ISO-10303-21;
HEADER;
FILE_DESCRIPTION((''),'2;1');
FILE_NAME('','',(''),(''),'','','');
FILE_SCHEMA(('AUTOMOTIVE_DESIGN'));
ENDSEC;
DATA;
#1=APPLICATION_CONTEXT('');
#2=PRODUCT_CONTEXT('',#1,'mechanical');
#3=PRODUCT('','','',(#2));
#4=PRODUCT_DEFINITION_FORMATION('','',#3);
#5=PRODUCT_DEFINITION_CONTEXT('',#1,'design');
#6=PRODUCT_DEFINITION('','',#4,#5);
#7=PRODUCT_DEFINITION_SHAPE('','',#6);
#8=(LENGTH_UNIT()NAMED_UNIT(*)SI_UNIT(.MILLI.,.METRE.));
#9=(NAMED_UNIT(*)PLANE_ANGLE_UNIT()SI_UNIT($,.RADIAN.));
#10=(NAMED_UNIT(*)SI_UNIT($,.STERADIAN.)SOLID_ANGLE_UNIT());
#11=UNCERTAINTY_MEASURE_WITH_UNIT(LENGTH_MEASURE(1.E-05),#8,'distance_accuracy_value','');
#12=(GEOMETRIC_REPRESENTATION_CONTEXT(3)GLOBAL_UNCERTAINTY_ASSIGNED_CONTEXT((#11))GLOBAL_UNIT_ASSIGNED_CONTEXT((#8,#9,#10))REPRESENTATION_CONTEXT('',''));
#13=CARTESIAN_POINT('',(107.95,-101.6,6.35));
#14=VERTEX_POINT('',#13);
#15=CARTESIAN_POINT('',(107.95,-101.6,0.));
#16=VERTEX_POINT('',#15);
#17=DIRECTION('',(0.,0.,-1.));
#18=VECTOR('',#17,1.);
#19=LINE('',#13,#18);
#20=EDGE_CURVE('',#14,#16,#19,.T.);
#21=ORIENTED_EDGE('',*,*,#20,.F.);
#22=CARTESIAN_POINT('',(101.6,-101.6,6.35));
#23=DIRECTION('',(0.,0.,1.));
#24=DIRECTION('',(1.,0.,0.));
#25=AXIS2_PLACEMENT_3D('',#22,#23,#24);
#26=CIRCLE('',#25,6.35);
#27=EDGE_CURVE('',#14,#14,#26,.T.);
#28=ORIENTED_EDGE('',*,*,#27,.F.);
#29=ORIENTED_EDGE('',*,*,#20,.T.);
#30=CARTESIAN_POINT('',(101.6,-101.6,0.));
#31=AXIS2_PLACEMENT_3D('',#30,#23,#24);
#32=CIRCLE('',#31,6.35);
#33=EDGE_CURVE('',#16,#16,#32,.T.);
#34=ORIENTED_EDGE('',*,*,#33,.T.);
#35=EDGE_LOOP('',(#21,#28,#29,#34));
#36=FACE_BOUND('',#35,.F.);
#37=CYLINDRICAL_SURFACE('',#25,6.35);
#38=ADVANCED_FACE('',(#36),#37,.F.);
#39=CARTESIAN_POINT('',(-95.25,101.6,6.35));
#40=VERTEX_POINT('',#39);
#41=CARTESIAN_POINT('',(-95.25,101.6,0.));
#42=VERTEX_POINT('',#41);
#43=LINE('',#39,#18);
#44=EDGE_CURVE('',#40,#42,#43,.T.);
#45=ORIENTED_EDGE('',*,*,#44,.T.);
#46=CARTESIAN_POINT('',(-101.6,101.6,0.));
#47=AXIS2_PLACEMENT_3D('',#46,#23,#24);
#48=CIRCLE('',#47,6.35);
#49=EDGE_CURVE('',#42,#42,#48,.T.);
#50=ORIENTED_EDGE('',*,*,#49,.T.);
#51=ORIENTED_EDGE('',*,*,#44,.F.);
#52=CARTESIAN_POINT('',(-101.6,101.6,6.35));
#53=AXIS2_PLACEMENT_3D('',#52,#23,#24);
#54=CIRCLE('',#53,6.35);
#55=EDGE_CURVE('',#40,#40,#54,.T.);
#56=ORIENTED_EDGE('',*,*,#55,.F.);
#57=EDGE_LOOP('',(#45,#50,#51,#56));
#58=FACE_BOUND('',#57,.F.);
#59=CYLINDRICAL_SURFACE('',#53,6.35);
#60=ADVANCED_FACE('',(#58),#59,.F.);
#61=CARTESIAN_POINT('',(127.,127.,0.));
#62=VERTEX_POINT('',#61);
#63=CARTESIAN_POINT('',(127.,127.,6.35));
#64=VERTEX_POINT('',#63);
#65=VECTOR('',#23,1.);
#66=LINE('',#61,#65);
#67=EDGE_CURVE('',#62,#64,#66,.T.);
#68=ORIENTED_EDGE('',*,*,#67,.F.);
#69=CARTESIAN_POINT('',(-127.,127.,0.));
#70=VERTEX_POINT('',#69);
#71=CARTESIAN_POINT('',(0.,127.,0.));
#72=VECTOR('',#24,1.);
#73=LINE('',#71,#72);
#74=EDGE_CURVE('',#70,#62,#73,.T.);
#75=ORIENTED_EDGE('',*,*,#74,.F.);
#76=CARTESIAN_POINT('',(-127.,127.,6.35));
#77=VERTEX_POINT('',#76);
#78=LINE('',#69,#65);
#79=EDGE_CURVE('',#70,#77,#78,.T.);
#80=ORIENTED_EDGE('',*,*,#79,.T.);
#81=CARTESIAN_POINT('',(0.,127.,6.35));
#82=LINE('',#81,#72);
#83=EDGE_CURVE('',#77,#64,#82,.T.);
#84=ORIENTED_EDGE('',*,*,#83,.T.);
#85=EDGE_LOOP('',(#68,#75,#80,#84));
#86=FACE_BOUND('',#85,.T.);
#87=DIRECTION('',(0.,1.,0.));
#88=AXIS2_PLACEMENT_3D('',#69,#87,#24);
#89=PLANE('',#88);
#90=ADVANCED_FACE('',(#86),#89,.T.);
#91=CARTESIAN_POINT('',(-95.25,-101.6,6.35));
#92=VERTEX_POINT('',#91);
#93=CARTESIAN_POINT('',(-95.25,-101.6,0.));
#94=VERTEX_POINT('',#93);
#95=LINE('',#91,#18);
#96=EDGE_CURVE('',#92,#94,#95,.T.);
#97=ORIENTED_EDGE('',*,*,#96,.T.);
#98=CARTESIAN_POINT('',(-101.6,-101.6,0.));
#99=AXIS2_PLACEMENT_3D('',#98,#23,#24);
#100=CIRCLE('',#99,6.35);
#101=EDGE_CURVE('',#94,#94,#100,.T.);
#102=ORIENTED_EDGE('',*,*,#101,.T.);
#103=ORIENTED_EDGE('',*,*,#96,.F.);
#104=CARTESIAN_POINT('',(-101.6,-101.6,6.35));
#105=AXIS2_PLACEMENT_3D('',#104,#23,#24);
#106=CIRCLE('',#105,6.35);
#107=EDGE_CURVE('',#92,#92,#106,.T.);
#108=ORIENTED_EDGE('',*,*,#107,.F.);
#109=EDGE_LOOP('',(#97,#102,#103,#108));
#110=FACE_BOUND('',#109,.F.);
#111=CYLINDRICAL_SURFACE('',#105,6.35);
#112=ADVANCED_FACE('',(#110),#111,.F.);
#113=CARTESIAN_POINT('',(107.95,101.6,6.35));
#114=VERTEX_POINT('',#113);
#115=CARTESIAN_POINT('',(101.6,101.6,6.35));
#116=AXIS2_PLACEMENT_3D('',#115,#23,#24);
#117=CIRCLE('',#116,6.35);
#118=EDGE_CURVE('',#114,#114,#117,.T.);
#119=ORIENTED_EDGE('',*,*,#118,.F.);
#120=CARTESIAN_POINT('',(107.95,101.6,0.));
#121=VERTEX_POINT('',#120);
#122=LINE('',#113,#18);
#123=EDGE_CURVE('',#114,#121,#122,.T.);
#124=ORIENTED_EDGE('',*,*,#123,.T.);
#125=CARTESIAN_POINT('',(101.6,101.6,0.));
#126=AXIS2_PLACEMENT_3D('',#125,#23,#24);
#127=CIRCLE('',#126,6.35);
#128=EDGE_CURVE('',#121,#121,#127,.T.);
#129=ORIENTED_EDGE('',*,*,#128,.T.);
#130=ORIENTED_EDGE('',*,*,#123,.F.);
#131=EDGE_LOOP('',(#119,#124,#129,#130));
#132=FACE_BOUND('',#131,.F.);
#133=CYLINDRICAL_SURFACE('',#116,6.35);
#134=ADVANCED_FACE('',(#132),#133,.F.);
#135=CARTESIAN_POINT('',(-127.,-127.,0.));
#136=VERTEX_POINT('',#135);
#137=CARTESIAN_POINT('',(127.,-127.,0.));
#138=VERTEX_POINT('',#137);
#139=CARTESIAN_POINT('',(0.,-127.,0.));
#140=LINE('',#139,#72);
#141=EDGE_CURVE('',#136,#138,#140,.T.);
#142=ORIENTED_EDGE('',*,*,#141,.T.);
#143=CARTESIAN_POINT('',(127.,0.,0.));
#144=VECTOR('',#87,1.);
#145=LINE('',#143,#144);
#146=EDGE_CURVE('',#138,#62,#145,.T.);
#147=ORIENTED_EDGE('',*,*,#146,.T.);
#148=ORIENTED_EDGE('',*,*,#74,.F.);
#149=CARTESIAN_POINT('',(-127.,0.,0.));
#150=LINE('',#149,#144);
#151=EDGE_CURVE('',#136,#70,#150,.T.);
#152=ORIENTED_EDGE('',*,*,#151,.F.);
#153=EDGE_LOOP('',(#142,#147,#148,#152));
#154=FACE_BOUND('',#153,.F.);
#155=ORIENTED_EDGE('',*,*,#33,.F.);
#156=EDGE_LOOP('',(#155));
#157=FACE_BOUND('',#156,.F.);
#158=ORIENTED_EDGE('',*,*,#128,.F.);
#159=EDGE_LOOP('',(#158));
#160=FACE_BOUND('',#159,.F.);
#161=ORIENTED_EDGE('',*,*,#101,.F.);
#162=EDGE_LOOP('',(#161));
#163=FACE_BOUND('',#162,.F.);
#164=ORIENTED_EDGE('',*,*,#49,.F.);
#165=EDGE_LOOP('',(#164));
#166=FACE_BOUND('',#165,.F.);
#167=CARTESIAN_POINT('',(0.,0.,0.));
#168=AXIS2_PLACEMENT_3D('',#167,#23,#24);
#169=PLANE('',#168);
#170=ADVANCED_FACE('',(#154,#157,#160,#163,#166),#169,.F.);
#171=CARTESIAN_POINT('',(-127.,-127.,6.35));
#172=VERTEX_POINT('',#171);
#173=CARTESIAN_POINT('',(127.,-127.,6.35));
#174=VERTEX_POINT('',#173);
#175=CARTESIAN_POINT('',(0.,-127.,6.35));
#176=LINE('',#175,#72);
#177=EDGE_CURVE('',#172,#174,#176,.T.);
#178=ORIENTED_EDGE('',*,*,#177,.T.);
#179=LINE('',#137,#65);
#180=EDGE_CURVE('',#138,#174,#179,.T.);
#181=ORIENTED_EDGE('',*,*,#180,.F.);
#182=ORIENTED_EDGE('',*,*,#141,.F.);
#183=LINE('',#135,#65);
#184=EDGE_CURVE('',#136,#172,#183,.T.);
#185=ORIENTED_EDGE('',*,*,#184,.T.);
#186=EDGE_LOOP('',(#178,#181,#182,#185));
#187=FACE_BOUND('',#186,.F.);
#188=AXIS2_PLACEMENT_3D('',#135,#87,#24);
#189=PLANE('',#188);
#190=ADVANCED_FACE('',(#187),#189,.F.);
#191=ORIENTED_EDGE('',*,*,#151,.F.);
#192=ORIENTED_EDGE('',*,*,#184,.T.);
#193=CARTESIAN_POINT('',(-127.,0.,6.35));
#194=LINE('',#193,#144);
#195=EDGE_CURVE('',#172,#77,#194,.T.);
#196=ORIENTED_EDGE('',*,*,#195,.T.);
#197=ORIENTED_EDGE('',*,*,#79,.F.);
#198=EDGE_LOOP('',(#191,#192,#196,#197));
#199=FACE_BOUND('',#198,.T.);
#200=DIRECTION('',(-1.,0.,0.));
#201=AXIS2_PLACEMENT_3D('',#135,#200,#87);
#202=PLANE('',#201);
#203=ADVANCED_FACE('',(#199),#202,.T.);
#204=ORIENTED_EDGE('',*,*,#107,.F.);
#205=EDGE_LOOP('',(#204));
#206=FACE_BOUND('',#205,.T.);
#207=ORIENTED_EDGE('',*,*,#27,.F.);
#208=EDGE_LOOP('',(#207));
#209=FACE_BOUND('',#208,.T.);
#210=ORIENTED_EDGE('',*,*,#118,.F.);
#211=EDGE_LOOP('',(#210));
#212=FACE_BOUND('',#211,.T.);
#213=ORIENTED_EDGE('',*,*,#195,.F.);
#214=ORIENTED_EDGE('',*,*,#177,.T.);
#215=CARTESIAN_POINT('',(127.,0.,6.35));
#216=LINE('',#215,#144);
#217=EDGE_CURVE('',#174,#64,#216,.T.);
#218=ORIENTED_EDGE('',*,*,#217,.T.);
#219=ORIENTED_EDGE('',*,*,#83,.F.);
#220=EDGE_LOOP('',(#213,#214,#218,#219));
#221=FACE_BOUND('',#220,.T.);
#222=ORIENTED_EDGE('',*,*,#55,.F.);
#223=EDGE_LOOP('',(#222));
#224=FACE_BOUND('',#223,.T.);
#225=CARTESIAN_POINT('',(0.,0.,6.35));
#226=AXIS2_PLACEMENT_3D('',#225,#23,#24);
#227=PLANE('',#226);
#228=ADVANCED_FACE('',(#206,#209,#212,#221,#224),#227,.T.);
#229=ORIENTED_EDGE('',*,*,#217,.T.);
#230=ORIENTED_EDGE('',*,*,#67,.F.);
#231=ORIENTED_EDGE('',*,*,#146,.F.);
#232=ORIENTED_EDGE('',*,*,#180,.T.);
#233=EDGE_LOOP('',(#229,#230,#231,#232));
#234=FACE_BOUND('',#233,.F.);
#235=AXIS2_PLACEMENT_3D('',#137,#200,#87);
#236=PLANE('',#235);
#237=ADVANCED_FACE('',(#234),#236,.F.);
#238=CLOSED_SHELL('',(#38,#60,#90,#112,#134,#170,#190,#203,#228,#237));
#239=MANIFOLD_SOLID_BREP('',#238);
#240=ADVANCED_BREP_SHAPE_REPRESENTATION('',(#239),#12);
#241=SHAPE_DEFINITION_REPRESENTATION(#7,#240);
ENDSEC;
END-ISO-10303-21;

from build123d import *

# Parameters (mm, degrees)
F0_W     = 254
F0_H     = 254
F1_DEPTH = 6.35
F2_R     = 6.35
F3_DEPTH = 12.7
F4_DEPTH = 6.351


# Not quite as in the source:
# - a feature names something its author has since deleted; it is built from what else it names


with BuildPart() as f1:
    # F0 (on Top) → F1 (new body)
    with BuildSketch(Plane.XY):
        Rectangle(F0_W, F0_H)
    extrude(amount=F1_DEPTH)

    # F2 (on face) → F3 (cut)
    with BuildSketch(Plane.XY.offset(6.35)):
        with Locations((-101.6, 101.6)):
            Circle(F2_R)
        with Locations((-101.6, -101.6)):
            Circle(F2_R)
        with Locations((101.6, 101.6)):
            Circle(F2_R)
        with Locations((101.6, -101.6)):
            Circle(F2_R)
    extrude(amount=-F3_DEPTH, mode=Mode.SUBTRACT)

    # F2 (on face) → F4 (cut, through all)
    with BuildSketch(Plane.XY.offset(6.35)):
        with Locations((-101.6, 101.6)):
            Circle(F2_R)
        with Locations((-101.6, -101.6)):
            Circle(F2_R)
        with Locations((101.6, 101.6)):
            Circle(F2_R)
        with Locations((101.6, -101.6)):
            Circle(F2_R)
    extrude(amount=-F4_DEPTH, mode=Mode.SUBTRACT)


solid = f1.part
